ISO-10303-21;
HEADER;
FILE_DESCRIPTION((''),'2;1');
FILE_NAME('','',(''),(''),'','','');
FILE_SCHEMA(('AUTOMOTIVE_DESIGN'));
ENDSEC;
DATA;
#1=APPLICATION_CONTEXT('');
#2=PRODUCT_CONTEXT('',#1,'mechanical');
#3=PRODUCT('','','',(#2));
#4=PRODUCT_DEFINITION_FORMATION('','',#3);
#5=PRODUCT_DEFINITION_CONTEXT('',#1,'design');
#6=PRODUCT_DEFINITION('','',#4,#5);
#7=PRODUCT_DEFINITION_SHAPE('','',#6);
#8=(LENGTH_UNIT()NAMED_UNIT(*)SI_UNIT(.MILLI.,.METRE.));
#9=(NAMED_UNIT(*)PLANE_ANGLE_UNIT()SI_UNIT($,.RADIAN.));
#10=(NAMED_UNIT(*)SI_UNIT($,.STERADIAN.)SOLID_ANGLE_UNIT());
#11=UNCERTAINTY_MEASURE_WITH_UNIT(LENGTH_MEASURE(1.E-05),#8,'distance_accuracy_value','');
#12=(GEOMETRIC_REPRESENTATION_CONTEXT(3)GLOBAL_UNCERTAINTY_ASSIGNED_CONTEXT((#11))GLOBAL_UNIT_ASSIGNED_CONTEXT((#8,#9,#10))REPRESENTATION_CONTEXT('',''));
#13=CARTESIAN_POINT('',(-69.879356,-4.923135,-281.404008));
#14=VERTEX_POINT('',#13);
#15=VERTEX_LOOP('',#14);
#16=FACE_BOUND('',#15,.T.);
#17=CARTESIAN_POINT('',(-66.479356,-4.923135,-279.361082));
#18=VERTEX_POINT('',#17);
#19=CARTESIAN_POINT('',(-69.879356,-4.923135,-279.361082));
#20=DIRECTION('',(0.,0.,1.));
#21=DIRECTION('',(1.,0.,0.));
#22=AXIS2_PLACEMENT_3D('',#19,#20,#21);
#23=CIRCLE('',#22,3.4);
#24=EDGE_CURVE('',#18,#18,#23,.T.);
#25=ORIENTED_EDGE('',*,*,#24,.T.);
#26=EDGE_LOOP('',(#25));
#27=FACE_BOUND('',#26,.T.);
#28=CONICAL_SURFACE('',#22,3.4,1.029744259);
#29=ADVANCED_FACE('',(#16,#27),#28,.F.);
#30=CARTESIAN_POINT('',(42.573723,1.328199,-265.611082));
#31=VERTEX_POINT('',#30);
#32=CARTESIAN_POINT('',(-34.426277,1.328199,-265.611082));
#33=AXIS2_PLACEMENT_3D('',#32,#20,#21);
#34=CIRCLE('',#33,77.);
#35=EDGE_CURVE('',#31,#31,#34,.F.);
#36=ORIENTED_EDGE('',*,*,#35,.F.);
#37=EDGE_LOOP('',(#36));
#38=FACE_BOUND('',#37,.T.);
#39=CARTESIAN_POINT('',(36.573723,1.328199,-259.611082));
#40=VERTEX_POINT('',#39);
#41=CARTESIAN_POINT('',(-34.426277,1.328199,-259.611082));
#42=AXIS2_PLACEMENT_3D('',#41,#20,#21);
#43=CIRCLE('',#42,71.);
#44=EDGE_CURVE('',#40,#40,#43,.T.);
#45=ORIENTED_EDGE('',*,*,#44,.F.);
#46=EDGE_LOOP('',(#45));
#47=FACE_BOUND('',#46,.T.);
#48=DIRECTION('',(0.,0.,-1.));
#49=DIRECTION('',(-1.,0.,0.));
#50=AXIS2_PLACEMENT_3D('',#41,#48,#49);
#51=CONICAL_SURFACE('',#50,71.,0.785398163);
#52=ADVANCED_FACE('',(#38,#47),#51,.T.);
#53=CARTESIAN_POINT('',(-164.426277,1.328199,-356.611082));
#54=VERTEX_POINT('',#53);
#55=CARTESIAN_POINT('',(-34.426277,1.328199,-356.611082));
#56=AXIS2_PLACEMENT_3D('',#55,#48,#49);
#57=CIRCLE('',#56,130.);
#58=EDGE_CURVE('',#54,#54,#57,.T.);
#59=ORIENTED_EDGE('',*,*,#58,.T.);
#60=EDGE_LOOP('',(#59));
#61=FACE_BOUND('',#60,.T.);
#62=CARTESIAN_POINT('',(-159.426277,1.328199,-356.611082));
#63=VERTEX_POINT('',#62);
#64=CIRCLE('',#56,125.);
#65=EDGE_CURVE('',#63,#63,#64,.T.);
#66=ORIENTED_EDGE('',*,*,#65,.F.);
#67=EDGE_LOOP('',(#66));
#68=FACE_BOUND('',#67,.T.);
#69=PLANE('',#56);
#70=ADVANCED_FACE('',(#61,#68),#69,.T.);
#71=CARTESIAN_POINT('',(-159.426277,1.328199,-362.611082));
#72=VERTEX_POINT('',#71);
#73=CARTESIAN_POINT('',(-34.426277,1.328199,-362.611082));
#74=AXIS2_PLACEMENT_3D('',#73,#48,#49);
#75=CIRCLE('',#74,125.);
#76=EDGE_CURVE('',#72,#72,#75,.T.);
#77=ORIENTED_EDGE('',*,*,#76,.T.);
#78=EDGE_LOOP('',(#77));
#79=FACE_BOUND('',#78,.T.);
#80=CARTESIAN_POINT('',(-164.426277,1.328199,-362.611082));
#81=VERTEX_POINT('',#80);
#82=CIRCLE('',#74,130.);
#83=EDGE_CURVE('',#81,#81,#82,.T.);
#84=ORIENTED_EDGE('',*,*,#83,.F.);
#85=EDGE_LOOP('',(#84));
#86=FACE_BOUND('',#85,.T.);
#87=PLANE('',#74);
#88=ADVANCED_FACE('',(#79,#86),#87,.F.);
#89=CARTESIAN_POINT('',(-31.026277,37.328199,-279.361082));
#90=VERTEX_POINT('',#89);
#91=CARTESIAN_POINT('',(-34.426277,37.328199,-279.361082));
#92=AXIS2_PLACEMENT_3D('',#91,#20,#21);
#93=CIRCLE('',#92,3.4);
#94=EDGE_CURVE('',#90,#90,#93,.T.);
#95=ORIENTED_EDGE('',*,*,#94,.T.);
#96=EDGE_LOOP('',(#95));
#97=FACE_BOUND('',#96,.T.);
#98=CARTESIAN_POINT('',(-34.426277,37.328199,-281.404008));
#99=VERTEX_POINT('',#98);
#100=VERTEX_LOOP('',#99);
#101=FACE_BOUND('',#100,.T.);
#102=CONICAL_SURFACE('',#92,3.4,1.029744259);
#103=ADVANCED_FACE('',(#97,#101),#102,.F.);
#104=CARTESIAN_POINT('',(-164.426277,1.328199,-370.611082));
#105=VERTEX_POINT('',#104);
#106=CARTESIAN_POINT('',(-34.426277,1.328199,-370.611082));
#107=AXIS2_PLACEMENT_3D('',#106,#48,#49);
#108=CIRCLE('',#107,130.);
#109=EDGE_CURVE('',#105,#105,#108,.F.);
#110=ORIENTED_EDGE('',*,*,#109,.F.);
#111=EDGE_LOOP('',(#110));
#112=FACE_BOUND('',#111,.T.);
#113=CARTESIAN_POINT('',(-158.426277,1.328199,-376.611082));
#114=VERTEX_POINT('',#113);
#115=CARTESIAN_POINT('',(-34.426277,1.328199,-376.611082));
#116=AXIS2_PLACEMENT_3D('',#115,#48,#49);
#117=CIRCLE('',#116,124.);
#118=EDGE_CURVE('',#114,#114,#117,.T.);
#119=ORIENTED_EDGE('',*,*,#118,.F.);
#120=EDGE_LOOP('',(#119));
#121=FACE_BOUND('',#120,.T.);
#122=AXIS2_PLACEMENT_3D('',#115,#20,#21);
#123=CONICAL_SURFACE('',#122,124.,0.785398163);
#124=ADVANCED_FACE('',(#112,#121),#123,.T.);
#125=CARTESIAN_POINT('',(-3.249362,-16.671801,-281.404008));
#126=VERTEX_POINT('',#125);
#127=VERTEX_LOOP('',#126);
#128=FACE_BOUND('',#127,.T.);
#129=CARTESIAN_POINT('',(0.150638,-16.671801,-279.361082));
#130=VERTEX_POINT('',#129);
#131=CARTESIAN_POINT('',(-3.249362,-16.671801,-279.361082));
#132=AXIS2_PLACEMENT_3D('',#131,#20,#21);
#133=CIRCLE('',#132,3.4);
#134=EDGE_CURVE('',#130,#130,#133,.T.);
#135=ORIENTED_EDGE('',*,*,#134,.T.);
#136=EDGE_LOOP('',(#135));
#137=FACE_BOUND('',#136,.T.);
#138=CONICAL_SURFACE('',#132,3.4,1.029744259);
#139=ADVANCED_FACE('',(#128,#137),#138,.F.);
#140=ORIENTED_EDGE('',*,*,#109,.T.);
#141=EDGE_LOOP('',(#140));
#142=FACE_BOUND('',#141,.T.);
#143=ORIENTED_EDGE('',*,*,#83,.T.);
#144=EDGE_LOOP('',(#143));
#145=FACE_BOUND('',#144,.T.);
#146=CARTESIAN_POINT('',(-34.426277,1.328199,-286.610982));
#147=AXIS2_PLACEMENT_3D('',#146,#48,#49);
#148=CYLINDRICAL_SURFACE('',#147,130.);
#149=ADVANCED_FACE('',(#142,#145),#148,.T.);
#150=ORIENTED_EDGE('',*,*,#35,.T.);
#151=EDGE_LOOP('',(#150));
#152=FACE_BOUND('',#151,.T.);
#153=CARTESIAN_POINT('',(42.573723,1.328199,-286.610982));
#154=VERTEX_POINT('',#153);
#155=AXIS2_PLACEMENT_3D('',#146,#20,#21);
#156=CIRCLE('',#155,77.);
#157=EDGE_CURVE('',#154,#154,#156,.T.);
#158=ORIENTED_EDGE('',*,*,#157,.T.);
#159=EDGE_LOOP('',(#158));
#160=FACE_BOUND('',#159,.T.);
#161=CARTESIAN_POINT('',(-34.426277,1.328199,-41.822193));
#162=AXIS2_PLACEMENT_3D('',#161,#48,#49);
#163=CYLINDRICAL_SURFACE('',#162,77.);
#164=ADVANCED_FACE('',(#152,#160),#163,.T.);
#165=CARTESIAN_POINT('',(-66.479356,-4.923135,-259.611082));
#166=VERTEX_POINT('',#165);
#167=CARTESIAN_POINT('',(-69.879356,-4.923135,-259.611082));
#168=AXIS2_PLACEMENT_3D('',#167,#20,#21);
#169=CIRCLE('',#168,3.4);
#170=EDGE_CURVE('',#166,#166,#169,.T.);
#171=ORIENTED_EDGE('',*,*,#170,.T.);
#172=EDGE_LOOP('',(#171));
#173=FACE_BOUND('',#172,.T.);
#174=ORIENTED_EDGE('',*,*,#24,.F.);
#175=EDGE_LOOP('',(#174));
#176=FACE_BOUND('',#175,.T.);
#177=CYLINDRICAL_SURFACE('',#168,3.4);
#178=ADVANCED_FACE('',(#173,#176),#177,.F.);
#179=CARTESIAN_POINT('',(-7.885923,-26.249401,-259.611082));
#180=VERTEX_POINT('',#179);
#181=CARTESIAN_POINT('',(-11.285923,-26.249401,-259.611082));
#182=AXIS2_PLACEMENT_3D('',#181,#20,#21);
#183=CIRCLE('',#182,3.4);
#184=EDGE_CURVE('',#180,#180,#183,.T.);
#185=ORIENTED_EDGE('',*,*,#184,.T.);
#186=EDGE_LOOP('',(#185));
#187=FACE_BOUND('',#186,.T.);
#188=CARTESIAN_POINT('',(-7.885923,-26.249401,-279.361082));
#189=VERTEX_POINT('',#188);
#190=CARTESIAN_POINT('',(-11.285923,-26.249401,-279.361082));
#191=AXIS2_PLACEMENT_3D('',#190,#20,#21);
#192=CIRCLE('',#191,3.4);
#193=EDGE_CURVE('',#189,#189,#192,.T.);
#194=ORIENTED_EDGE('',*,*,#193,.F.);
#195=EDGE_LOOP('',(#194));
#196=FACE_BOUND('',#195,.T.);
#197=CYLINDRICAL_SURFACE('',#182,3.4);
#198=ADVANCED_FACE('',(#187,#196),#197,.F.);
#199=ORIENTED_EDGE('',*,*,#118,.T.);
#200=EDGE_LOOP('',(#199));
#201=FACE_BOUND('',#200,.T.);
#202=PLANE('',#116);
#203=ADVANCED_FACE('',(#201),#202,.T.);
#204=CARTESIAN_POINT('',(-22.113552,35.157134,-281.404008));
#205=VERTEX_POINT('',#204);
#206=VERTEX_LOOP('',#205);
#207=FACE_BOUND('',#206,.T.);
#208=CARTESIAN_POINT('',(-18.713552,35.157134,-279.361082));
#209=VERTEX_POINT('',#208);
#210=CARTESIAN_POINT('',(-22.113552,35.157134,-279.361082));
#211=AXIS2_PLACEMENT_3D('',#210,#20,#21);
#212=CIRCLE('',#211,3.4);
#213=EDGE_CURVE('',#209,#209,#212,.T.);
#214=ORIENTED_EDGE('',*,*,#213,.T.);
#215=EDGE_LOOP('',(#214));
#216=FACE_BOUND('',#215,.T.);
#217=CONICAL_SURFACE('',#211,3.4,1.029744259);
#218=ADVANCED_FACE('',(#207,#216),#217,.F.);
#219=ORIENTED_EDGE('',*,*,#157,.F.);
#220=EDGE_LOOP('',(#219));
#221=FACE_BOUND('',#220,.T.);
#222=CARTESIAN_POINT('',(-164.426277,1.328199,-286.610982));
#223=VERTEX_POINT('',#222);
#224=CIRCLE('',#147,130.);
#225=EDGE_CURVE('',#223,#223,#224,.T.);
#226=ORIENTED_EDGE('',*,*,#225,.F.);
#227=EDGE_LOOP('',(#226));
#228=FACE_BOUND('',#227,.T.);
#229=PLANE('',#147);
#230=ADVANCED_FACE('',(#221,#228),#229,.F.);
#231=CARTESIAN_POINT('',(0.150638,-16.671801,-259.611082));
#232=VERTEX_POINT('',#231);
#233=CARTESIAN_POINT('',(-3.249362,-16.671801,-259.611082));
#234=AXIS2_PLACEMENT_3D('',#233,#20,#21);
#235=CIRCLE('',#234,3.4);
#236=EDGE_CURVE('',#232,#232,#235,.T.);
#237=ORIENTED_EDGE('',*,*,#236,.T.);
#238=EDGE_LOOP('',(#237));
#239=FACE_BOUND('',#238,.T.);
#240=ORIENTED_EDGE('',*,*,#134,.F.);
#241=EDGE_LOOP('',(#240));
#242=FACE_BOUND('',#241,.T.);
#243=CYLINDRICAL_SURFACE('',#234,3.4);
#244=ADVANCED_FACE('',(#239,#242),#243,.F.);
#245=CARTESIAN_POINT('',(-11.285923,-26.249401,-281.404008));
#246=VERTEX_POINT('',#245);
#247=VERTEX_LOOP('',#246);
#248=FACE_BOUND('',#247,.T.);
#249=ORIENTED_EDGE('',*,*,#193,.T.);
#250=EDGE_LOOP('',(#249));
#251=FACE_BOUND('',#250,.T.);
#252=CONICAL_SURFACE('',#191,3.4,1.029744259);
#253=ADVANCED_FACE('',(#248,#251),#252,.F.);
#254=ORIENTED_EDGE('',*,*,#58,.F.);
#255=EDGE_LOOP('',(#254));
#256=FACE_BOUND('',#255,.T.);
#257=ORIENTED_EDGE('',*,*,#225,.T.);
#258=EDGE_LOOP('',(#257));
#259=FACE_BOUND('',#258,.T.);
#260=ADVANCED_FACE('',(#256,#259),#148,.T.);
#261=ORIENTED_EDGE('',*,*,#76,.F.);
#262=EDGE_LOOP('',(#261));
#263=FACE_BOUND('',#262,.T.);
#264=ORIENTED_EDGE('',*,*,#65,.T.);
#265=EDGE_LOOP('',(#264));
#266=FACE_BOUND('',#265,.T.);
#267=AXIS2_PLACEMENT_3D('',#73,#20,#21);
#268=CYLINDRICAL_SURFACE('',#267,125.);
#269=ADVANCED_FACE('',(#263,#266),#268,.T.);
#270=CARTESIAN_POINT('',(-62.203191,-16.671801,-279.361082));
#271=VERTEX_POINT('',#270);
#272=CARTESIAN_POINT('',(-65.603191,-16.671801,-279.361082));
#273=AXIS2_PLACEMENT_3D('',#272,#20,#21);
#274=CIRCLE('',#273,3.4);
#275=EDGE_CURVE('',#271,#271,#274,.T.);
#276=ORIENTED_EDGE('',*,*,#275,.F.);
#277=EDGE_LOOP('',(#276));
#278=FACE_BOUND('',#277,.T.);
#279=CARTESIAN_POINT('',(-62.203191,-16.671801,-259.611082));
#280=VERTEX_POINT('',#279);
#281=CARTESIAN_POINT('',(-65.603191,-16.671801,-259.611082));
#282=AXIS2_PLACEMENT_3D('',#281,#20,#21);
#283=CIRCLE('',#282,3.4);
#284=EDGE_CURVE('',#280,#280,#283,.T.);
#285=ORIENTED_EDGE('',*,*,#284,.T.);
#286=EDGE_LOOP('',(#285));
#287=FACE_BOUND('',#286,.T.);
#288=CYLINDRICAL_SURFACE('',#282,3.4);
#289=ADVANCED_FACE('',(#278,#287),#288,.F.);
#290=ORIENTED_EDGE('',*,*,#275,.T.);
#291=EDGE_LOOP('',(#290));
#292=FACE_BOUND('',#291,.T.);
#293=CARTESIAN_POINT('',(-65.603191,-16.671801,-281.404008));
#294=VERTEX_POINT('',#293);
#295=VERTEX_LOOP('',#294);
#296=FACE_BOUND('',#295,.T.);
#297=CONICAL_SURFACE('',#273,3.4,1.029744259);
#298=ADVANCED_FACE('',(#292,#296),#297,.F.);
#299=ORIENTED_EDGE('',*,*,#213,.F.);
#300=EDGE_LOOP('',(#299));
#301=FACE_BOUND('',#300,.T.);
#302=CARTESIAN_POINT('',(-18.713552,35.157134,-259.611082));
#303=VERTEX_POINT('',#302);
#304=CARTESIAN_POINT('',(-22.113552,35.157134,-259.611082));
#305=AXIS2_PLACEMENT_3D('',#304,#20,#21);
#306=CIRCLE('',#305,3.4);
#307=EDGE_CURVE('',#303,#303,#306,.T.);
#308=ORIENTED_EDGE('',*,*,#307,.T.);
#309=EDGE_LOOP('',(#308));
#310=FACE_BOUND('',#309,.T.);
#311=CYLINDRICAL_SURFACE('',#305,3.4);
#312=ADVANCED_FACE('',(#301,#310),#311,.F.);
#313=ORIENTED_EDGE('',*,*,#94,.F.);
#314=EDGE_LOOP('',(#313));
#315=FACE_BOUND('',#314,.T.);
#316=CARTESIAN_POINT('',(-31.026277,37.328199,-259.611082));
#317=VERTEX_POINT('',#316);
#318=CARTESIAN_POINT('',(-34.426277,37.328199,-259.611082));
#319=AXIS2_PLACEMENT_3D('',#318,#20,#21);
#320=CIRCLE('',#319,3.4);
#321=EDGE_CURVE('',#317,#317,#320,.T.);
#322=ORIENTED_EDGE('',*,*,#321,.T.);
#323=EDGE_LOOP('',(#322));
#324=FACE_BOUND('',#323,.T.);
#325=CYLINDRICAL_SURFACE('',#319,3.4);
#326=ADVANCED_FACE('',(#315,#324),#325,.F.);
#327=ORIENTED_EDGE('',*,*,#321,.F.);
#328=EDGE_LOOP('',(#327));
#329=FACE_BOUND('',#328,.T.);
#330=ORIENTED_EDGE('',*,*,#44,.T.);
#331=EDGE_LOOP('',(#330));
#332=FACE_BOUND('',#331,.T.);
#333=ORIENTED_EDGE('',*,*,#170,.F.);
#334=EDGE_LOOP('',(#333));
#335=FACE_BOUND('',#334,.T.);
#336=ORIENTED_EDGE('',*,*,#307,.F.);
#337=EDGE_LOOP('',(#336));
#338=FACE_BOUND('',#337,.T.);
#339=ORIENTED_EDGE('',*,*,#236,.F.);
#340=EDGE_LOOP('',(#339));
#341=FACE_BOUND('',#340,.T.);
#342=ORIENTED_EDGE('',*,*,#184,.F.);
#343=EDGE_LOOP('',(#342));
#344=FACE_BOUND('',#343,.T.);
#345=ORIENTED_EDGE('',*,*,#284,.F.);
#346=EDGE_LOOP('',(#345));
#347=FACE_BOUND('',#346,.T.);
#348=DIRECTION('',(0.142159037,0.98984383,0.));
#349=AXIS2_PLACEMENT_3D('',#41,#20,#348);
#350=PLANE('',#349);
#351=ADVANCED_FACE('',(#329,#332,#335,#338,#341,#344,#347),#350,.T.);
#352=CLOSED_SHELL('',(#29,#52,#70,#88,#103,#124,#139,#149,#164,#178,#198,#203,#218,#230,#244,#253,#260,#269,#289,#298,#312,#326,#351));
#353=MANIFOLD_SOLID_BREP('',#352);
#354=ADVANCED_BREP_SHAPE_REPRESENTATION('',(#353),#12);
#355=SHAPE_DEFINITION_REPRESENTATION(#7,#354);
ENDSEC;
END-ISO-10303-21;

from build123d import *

# Parameters (mm, degrees)
BOSS_EXTRUDE1_START        = -120.0001
BOSS_EXTRUDE1_OUTLINE_R    = 130
BOSS_EXTRUDE1_DEPTH        = 90.0001
SKETCH2_R                  = 130
SKETCH2_R_2                = 125
CUT_EXTRUDE1_DEPTH         = 6
SKETCH3_R                  = 77
BOSS_EXTRUDE2_DEPTH        = 26.9999
M8X1_25_TAPPED_HOLE1_D     = 6.8
M8X1_25_TAPPED_HOLE1_DEPTH = 19.75
M8X1_25_TAPPED_HOLE1_TIP   = 2.042926105
CHAMFER1_SIZE              = 6
CHAMFER2_SIZE              = 6


# Read off the part's stored shape, not the designer's step: Boss-Extrude1
with BuildPart() as part:
    # Boss-Extrude1 outline → Boss-Extrude1 (new body)
    with BuildSketch(Plane(origin=(0, 0, -406.611081847), x_dir=(-1, 0, 0), z_dir=(0, 0, -1)).offset(BOSS_EXTRUDE1_START)):
        with Locations((34.426276825, 1.328199188)):
            Circle(BOSS_EXTRUDE1_OUTLINE_R)
    extrude(amount=BOSS_EXTRUDE1_DEPTH)

    # Sketch2 → Cut-Extrude1 (cut)
    with BuildSketch(Plane(origin=(0, 0, -356.611081847), x_dir=(-1, 0, 0), z_dir=(0, 0, -1))):
        with Locations((34.426276825, 1.328199188)):
            Circle(SKETCH2_R)
        with Locations((34.426276825, 1.328199188)):
            Circle(SKETCH2_R_2, mode=Mode.SUBTRACT)
    extrude(amount=CUT_EXTRUDE1_DEPTH, mode=Mode.SUBTRACT)

    # Sketch3 → Boss-Extrude2 (add)
    with BuildSketch(Plane.XY.offset(-286.610981847)):
        with Locations((-34.426276825, 1.328199188)):
            Circle(SKETCH3_R)
    extrude(amount=BOSS_EXTRUDE2_DEPTH)

    # M8x1.25 Tapped Hole1
    with Locations(Plane.XY.offset(-259.611081847)):
        with Locations((-34.426276825, 37.328199188), (-22.113551665, 35.157133536), (-3.249362288, -16.671800812), (-11.285922876, -26.249400764), (-65.603191361, -16.671800812), (-69.879355933, -4.923135208)):
            Hole(M8X1_25_TAPPED_HOLE1_D / 2, depth=M8X1_25_TAPPED_HOLE1_DEPTH)
            with Locations((0, 0, -(M8X1_25_TAPPED_HOLE1_DEPTH + M8X1_25_TAPPED_HOLE1_TIP / 2))):  # 118° drill point
                Cone(0, M8X1_25_TAPPED_HOLE1_D / 2, M8X1_25_TAPPED_HOLE1_TIP, mode=Mode.SUBTRACT)

    # Chamfer1
    chamfer1_edges = [part.edges().sort_by_distance(p)[0] for p in [
        (-111.426276825, 1.328199188, -259.611081847),
    ]]
    chamfer(chamfer1_edges, length=CHAMFER1_SIZE)

    # Chamfer2
    chamfer2_edges = [part.edges().sort_by_distance(p)[0] for p in [
        (95.573723175, 1.328199188, -376.611081847),
    ]]
    chamfer(chamfer2_edges, length=CHAMFER2_SIZE)


solid = part.part
